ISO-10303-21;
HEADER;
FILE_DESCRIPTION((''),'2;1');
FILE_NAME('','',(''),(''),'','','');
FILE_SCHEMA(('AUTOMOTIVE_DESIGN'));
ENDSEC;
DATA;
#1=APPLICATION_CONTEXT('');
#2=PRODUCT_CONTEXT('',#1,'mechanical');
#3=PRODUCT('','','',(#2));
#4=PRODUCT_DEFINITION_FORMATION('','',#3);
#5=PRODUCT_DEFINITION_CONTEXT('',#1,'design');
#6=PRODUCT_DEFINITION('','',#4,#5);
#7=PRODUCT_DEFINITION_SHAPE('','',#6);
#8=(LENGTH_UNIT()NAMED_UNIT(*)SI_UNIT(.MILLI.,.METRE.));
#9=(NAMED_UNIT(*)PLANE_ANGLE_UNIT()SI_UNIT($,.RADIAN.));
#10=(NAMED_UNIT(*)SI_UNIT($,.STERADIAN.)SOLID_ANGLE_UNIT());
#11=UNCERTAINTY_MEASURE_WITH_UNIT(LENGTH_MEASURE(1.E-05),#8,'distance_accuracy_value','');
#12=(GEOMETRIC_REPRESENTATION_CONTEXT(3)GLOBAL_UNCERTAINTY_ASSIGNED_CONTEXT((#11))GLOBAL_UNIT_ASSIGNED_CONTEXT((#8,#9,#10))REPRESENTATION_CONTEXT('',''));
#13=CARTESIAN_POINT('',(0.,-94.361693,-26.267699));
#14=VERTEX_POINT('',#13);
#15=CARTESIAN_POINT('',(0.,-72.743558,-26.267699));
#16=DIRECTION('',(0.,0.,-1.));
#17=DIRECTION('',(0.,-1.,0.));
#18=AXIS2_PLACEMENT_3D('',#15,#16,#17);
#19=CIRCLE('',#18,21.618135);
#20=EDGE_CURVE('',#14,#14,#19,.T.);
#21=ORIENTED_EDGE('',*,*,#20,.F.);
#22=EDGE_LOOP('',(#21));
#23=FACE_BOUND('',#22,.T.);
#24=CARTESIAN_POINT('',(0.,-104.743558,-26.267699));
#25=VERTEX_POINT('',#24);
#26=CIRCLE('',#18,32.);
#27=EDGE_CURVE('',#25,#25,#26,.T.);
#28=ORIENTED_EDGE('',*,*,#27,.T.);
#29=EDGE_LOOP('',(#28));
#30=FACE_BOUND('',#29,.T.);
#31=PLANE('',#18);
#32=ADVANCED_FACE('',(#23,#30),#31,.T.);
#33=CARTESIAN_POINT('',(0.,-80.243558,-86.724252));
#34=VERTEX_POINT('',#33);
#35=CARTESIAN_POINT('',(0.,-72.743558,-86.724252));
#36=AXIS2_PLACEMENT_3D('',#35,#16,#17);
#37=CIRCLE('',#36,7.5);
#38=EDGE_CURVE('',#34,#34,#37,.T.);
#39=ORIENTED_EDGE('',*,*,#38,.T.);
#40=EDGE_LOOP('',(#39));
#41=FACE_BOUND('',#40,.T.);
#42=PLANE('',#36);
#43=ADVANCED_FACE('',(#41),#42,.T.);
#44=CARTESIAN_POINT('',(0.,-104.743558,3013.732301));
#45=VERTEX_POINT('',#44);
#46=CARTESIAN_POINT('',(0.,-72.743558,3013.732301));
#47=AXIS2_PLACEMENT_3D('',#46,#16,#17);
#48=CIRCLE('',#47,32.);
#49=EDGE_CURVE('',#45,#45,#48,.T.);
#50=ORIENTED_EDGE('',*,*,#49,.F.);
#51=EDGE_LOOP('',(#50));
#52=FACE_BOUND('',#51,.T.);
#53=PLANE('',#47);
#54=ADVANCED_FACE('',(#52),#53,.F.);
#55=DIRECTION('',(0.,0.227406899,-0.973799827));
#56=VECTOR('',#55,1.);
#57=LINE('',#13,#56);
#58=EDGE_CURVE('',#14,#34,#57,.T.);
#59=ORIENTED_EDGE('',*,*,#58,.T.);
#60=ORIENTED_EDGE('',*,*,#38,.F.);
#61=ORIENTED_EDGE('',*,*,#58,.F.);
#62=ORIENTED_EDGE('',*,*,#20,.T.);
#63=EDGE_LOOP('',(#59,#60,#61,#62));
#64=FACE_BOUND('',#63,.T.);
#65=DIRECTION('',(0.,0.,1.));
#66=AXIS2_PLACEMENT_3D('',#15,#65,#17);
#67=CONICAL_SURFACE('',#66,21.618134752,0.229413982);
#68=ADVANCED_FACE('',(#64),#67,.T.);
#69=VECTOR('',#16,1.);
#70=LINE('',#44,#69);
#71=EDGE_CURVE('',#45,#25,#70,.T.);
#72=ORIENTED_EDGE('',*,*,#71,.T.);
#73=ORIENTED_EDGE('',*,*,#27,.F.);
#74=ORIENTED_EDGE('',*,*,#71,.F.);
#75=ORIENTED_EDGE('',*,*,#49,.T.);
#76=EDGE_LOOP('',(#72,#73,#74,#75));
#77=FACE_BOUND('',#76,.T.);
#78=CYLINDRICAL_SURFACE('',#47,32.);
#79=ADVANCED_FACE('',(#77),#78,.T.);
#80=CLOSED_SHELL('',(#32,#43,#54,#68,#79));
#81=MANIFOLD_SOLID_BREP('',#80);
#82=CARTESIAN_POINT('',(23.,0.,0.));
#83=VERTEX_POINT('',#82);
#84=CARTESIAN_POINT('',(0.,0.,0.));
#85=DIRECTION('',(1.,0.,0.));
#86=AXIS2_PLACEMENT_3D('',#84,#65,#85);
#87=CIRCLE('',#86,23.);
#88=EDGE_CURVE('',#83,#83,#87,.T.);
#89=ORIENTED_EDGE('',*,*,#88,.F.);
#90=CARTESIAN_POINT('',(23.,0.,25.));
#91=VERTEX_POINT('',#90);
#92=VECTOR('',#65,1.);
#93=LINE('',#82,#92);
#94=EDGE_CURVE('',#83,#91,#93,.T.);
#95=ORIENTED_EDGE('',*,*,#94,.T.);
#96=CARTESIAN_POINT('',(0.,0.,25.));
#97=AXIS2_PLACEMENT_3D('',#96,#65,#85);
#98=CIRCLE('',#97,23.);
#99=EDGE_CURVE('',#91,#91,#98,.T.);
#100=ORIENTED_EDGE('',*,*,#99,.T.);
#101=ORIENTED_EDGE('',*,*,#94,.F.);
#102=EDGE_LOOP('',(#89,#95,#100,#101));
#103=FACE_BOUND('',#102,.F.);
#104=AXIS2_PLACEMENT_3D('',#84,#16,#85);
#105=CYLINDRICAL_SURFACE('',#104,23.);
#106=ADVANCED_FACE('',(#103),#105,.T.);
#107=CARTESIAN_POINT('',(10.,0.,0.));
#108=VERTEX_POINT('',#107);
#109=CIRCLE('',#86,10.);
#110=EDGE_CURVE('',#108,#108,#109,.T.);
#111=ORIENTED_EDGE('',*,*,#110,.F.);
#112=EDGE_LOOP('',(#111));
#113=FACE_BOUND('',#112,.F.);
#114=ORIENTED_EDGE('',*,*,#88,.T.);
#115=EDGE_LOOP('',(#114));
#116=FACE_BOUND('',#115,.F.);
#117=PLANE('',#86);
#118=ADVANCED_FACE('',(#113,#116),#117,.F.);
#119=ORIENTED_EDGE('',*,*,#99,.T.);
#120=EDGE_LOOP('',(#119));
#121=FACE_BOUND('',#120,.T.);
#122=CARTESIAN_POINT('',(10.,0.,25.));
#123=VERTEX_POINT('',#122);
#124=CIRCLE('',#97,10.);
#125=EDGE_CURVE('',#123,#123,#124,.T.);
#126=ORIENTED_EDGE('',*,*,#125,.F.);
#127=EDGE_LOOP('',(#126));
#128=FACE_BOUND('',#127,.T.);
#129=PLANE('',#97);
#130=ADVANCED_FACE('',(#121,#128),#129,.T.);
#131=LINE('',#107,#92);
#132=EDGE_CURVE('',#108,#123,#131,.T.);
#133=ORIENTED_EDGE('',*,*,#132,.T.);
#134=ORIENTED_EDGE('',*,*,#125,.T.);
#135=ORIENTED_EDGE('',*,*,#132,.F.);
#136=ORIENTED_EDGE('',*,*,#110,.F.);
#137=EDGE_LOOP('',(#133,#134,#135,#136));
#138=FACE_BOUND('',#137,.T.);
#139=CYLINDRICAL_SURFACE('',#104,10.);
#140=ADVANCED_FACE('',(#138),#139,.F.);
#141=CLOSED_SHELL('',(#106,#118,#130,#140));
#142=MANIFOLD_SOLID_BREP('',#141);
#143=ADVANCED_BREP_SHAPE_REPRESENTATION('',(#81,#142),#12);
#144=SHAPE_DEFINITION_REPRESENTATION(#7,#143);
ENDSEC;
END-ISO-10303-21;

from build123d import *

# Parameters (mm, degrees)
F0_R     = 23
F0_R_2   = 10
F1_DEPTH = 25


# Not quite as in the source:
# - a feature names something its author has since deleted; it is built from what else it names


with BuildPart() as f1:
    # F0 (on Top) → F1 (new body)
    with BuildSketch(Plane.XY):
        Circle(F0_R)
        Circle(F0_R_2, mode=Mode.SUBTRACT)
    extrude(amount=F1_DEPTH)


with BuildPart() as f3:
    # F2 (on Right) → F3 (revolve)
    with BuildSketch(Plane.YZ):
        Polygon((-72.7435579151, 3013.7323013039), (-104.7435579151, 3013.7323013039), (-104.7435579151, -26.2676986961), (-94.361692667, -26.2676986961), (-80.2435579151, -86.7242515087), (-72.7435579151, -86.7242515087), (-72.7435579151, -63.013613224), (-72.7435579151, -26.2676986961), align=None)
    revolve(axis=Axis((0, -72.7435579151, 1493.7323013039), (0, 0, -1)))


solid = Compound([f1.part, f3.part])
